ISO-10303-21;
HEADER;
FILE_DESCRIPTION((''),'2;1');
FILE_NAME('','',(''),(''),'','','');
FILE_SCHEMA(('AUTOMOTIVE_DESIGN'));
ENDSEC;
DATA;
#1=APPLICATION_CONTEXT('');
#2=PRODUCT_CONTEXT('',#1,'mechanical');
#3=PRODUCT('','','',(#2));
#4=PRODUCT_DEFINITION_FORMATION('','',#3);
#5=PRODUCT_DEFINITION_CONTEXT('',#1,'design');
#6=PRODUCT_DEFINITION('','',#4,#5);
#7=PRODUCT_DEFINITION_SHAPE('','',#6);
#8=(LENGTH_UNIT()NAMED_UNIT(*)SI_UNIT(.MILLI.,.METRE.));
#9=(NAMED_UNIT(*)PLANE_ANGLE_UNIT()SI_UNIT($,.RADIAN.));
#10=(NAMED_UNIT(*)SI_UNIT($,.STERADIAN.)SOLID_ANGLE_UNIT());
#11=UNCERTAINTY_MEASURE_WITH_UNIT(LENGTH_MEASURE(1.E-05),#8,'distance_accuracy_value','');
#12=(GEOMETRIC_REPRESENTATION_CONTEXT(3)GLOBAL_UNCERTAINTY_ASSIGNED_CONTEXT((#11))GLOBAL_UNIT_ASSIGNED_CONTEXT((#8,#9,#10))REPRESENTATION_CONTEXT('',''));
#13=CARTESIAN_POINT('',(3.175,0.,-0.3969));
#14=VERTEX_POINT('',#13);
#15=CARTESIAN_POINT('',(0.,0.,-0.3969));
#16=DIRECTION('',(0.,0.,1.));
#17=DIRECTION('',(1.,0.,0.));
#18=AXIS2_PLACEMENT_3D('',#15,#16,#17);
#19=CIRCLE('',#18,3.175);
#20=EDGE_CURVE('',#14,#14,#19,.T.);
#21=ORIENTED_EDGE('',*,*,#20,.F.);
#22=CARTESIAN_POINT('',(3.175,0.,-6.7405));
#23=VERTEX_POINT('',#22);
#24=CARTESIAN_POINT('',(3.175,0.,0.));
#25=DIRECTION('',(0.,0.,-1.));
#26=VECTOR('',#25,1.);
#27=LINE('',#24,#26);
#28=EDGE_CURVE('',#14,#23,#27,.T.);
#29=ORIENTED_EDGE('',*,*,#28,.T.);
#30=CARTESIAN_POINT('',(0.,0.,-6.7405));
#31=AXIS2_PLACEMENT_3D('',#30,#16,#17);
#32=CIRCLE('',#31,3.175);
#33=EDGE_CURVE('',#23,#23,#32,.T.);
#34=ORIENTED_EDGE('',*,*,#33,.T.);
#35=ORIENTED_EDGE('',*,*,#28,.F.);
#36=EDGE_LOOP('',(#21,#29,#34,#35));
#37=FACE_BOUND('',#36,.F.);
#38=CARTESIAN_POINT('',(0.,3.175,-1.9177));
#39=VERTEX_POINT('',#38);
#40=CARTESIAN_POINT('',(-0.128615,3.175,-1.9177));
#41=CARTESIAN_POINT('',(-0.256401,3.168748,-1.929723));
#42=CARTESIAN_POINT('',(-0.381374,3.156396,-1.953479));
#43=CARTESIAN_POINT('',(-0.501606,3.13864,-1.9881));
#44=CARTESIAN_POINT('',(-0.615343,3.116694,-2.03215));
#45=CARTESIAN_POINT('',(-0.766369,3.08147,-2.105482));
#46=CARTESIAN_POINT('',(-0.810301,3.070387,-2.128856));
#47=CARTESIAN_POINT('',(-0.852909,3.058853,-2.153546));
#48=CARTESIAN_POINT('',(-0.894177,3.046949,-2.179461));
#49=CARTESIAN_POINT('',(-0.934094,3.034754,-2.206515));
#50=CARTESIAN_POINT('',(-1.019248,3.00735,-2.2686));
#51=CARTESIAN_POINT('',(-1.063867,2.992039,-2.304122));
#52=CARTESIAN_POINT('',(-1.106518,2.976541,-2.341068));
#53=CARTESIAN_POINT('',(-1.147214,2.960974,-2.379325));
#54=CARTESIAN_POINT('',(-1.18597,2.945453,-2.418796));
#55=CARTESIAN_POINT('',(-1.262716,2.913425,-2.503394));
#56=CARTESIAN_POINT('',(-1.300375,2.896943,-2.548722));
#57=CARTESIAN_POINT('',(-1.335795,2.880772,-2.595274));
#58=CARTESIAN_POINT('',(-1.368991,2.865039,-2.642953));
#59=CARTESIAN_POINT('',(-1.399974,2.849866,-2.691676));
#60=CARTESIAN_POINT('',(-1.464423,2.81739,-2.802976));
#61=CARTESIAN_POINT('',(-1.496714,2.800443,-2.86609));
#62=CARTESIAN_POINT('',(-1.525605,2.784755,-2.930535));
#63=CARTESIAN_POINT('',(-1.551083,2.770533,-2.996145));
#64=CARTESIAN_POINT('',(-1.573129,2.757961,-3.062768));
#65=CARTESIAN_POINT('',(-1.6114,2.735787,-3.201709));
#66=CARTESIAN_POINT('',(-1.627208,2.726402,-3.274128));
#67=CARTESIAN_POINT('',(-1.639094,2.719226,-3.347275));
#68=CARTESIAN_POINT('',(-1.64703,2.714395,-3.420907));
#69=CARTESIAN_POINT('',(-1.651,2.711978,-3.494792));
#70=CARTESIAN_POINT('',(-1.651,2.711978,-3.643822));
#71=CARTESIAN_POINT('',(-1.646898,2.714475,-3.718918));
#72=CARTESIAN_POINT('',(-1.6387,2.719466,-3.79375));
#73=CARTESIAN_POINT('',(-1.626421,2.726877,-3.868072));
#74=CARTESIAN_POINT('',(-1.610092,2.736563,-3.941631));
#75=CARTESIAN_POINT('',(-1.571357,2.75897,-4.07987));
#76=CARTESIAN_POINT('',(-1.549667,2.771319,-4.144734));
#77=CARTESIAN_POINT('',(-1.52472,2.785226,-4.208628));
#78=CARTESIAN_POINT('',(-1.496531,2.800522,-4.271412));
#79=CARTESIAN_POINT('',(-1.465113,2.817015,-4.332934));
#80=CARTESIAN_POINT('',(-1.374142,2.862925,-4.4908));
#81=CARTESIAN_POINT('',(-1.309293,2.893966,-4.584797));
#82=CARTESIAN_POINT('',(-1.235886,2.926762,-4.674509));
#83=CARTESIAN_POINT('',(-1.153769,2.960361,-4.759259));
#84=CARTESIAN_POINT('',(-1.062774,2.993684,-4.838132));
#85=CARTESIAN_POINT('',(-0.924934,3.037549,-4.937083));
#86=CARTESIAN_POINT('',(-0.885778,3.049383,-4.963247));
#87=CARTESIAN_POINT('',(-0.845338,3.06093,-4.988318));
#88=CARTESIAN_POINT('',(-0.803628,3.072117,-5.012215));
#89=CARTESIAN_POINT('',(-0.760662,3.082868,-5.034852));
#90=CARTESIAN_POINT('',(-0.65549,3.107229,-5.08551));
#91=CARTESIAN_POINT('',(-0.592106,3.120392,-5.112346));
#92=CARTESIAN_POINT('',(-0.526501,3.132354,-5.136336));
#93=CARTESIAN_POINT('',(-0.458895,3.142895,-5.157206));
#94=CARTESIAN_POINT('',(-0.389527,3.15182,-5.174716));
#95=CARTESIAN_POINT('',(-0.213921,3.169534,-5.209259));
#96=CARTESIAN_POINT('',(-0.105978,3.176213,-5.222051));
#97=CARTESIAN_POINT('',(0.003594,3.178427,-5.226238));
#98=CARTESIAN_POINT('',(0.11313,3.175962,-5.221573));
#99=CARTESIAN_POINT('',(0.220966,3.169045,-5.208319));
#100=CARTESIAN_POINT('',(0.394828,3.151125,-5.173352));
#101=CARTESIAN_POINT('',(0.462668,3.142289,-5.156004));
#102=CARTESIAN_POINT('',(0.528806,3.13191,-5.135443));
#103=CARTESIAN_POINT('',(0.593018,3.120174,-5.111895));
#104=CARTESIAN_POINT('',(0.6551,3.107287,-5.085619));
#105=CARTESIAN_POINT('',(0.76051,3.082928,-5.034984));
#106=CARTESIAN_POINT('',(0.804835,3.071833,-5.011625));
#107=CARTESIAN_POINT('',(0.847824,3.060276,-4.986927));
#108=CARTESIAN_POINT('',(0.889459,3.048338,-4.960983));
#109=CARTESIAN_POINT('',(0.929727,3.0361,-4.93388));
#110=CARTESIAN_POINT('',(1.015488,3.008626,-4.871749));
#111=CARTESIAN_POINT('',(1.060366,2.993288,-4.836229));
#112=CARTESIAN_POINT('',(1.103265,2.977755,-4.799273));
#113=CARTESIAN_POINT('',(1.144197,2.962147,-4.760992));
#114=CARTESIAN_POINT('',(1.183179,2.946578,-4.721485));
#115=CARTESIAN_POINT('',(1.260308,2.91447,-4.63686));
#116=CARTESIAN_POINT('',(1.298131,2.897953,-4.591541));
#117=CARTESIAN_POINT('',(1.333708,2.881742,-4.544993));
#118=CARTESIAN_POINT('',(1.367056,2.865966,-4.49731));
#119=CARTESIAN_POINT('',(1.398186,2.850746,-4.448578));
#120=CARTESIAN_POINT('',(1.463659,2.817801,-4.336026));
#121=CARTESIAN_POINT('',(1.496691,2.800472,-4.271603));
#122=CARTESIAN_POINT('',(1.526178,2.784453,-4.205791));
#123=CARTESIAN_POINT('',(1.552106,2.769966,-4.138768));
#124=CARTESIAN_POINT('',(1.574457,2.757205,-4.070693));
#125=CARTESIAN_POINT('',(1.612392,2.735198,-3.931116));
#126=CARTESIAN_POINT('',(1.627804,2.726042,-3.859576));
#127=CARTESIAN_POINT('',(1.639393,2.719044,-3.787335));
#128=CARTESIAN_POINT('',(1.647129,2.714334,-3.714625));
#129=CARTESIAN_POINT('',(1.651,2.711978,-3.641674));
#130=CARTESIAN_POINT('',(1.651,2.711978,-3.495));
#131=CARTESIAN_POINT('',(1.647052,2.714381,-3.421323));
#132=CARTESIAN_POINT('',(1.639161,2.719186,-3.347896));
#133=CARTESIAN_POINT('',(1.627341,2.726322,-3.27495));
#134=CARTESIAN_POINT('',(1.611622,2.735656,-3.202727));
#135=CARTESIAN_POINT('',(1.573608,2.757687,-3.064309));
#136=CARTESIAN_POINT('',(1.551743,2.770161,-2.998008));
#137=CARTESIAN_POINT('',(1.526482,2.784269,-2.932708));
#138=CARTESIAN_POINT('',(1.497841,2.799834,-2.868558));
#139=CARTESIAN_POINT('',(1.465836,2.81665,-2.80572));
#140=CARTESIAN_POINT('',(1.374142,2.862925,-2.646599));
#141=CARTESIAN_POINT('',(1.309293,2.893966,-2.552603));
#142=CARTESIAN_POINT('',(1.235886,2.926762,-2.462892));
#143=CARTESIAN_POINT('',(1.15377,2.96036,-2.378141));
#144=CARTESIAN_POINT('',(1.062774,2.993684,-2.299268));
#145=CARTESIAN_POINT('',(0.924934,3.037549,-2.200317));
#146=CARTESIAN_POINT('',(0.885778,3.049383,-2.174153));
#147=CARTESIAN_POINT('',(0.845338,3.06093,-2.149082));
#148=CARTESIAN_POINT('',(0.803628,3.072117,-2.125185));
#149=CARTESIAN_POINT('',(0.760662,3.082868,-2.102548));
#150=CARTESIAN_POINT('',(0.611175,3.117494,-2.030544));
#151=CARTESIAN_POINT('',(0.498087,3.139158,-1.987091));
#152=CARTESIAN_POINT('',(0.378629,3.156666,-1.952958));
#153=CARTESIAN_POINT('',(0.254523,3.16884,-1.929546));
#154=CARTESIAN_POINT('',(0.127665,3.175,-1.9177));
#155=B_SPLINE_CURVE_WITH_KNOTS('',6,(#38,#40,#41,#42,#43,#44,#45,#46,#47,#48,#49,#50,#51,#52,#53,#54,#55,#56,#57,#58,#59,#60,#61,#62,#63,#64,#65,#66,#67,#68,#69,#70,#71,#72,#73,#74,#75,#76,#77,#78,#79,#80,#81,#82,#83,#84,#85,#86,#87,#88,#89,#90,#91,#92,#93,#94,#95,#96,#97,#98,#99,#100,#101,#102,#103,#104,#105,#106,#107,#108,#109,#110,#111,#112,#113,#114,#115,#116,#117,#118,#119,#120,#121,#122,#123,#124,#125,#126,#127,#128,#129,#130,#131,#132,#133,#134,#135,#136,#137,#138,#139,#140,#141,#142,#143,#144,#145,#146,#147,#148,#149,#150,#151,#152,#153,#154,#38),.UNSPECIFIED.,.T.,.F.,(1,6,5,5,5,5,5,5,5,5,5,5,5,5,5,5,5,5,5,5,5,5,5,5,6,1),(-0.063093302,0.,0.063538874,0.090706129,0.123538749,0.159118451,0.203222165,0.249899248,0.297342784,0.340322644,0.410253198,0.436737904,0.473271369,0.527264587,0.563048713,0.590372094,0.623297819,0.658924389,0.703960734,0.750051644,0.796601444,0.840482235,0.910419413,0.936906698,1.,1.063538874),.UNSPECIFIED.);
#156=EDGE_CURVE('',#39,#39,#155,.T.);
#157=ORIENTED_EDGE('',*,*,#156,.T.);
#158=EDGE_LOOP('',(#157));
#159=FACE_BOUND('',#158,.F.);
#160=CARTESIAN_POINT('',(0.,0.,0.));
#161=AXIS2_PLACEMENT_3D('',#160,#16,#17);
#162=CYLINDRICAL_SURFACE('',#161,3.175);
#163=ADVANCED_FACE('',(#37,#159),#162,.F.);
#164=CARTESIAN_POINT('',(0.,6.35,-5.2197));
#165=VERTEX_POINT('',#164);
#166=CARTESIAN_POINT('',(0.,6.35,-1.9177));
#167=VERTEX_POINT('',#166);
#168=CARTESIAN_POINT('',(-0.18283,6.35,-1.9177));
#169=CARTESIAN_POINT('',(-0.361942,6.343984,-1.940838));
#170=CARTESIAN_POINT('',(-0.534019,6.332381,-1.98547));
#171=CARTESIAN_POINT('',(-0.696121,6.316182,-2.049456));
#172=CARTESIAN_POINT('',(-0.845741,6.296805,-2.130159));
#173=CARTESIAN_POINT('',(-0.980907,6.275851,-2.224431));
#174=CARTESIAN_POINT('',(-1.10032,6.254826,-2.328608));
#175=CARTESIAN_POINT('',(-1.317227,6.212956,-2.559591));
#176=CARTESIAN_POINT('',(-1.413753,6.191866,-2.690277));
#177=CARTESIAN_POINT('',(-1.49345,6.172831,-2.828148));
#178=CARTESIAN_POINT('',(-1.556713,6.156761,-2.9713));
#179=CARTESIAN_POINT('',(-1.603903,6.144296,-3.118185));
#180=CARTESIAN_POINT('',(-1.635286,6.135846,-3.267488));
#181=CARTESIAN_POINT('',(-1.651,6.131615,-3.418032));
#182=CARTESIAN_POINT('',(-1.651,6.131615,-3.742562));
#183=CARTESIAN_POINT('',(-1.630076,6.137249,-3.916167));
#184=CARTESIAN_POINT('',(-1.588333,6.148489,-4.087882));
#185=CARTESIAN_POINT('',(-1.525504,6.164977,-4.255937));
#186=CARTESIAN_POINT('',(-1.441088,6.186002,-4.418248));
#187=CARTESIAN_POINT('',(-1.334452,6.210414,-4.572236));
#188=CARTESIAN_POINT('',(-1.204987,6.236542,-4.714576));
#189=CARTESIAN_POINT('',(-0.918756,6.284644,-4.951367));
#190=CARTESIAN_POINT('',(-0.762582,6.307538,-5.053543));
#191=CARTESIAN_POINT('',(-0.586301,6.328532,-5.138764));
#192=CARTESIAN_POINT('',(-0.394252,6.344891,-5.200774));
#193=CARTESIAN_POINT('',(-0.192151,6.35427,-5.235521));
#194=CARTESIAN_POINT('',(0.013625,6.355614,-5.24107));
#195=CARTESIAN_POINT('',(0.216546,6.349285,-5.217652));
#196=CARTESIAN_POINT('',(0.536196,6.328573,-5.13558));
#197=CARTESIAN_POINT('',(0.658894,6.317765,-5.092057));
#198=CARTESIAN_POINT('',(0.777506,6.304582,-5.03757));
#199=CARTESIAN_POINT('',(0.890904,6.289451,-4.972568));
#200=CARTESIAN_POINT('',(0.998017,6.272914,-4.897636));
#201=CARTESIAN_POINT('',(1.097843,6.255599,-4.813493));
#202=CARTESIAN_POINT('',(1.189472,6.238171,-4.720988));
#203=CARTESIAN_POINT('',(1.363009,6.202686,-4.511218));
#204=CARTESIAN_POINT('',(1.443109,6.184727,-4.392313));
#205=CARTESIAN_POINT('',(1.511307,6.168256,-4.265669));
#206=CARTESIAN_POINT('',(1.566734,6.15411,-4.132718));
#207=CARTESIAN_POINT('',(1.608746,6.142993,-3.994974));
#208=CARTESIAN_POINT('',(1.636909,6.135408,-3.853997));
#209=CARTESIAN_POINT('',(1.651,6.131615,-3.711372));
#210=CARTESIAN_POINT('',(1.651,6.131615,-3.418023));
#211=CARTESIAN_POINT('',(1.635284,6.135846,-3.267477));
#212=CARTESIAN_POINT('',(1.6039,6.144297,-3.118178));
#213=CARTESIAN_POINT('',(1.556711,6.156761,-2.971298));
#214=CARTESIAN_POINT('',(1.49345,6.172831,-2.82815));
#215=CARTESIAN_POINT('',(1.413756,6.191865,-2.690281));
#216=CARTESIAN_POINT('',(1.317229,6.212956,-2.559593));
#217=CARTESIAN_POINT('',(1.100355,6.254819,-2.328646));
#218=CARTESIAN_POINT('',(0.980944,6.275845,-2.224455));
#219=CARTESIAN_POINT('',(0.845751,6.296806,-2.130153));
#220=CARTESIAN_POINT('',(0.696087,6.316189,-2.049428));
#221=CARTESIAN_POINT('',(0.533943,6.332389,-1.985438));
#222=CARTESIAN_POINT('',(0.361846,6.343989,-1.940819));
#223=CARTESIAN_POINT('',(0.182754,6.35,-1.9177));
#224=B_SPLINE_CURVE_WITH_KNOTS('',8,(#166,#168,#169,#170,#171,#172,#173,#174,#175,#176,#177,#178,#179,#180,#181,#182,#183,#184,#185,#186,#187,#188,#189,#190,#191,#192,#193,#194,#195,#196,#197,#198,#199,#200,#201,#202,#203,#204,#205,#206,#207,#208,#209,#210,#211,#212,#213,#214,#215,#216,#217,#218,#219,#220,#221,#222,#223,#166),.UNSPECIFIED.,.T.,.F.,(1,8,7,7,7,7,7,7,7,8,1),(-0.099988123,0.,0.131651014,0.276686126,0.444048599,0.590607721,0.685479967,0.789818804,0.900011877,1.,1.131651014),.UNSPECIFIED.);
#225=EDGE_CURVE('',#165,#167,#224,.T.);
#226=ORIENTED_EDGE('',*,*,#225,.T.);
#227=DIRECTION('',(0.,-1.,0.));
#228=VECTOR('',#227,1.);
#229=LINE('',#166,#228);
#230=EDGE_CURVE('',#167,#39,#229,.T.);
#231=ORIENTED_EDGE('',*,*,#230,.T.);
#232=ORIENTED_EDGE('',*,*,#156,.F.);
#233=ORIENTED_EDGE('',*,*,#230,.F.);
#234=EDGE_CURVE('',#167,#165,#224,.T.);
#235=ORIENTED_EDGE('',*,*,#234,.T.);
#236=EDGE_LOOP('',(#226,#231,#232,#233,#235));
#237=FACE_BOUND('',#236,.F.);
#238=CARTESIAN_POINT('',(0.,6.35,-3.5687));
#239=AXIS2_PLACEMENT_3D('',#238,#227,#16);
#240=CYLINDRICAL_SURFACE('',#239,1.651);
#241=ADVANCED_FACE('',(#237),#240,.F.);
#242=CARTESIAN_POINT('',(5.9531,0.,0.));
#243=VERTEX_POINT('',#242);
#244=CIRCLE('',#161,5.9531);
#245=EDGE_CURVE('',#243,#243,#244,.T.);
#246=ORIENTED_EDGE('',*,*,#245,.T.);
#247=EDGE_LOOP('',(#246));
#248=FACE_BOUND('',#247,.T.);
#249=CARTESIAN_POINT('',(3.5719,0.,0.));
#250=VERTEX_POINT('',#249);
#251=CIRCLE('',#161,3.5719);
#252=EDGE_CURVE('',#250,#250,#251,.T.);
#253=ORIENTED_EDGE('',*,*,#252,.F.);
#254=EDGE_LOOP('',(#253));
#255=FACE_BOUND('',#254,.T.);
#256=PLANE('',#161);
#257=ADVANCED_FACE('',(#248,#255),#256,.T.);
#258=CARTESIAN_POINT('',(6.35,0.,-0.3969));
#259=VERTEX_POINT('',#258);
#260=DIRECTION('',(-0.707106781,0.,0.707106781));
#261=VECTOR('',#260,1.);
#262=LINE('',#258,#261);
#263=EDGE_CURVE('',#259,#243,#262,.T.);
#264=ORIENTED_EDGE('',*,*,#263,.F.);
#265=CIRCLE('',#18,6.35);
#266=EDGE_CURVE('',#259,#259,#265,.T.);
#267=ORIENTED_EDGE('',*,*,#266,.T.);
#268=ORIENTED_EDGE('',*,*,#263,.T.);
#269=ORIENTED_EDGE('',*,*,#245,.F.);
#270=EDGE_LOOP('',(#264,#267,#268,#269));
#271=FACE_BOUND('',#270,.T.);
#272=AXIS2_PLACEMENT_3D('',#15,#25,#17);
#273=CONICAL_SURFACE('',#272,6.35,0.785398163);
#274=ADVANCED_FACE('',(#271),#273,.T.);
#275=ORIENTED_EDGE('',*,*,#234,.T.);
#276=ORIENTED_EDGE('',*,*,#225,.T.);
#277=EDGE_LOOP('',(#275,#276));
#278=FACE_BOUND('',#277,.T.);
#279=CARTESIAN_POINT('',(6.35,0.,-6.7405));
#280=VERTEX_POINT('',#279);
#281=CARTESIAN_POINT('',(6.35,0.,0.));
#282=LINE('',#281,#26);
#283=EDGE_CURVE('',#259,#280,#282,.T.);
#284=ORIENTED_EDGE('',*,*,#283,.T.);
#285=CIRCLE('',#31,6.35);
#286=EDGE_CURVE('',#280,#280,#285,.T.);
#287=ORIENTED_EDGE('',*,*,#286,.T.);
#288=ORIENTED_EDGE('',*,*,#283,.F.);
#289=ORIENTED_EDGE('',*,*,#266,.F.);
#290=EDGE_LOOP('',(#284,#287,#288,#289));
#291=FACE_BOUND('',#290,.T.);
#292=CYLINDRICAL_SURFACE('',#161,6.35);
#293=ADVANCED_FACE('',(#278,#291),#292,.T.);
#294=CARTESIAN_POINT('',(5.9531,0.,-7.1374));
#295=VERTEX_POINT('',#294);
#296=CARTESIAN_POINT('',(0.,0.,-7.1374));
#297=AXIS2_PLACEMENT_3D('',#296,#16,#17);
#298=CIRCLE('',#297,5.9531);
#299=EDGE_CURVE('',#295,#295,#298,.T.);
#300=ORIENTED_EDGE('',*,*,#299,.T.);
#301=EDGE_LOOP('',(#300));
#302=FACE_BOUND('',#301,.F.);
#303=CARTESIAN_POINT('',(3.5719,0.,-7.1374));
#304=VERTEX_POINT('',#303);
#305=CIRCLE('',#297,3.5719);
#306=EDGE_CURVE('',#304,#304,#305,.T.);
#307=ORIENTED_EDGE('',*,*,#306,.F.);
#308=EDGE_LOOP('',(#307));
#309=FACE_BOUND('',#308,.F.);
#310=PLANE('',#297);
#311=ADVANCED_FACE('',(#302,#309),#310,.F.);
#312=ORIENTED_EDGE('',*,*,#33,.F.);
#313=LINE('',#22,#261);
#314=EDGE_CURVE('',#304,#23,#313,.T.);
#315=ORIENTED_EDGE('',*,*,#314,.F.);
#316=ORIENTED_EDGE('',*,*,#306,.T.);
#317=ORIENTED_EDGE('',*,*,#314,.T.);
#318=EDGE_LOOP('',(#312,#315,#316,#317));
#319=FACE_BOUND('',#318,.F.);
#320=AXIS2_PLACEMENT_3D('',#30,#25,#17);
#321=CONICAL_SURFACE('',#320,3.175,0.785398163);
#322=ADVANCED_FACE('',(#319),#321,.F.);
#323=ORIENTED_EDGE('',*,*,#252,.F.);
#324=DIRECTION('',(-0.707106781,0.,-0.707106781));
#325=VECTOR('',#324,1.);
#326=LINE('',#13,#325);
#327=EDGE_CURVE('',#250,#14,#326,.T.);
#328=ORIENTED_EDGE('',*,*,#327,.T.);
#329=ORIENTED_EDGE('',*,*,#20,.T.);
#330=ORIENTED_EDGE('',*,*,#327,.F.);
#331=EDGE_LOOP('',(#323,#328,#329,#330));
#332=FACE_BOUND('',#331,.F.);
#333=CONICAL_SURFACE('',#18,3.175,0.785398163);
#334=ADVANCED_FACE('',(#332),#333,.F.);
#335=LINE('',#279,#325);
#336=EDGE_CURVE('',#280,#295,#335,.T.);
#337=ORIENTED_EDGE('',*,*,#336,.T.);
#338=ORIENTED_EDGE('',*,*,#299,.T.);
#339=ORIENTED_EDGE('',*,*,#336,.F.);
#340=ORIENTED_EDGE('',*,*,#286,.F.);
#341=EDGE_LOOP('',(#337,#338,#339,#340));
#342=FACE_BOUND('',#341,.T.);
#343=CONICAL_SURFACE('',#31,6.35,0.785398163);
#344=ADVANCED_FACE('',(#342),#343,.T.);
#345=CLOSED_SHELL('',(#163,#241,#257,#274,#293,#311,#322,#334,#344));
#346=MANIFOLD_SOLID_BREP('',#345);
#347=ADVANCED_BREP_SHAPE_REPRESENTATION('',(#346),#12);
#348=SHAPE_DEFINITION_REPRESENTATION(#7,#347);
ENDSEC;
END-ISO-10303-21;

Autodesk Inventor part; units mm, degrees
ref_plane "YZ Plane" through (0, 0, 0) normal (1, 0, 0) x (0, 1, 0)
ref_plane "XY Plane" through (0, 0, 0) normal (0, 0, 1) x (1, 0, 0)
sketch "Sketch1" plane through (0, 0, 0) normal (0, 0, 1) x (1, 0, 0)
  circle A0 centre (0, 0) radius 6.35
  dimension "d0" = 12.7
extrude "Extrusion1" add sketch "Sketch1" against normal blind 7.1374
sketch "Sketch2" plane through (0, 0, 0) normal (0, 0, 1) x (1, 0, 0)
  circle A0 centre (0, 0) radius 6.35 projected
  circle A1 centre (0, 0) radius 3.175
  dimension "d3" = 6.35
extrude "Extrusion2" cut sketch "Sketch2" against normal up to next contours A1
chamfer "Chamfer1" distance 0.3969 angle 45 4 edges at (-6.35, 0, 0) (-6.35, 0, -7.1374) (-3.175, 0, 0) (-3.175, 0, -7.1374)
ref_plane "Work Plane1" through (0, 6.35, 0) normal (0, 1, 0) x (-1, 0, 0)
sketch "Sketch3" plane through (0, 6.35, 0) normal (0, 1, 0) x (-1, 0, 0)
  line L0 (5.9531, -7.1374) -> (-5.9531, -7.1374) projected
  line L1 (6.35, -0.3969) -> (6.35, -6.7405) projected
  point P0 (0, 0)
  point P1 (0, -3.5687)
hole "Hole1" at (0, 6.35, -3.5687) direction (0, -1, 0) diameter 3.302 end up to surface thread size "8-32 UNC" class "2B" standard "ANSI Unified Screw Threads"
properties part number "Misc_ShaftCollar_Ruland_SC-4-F"
